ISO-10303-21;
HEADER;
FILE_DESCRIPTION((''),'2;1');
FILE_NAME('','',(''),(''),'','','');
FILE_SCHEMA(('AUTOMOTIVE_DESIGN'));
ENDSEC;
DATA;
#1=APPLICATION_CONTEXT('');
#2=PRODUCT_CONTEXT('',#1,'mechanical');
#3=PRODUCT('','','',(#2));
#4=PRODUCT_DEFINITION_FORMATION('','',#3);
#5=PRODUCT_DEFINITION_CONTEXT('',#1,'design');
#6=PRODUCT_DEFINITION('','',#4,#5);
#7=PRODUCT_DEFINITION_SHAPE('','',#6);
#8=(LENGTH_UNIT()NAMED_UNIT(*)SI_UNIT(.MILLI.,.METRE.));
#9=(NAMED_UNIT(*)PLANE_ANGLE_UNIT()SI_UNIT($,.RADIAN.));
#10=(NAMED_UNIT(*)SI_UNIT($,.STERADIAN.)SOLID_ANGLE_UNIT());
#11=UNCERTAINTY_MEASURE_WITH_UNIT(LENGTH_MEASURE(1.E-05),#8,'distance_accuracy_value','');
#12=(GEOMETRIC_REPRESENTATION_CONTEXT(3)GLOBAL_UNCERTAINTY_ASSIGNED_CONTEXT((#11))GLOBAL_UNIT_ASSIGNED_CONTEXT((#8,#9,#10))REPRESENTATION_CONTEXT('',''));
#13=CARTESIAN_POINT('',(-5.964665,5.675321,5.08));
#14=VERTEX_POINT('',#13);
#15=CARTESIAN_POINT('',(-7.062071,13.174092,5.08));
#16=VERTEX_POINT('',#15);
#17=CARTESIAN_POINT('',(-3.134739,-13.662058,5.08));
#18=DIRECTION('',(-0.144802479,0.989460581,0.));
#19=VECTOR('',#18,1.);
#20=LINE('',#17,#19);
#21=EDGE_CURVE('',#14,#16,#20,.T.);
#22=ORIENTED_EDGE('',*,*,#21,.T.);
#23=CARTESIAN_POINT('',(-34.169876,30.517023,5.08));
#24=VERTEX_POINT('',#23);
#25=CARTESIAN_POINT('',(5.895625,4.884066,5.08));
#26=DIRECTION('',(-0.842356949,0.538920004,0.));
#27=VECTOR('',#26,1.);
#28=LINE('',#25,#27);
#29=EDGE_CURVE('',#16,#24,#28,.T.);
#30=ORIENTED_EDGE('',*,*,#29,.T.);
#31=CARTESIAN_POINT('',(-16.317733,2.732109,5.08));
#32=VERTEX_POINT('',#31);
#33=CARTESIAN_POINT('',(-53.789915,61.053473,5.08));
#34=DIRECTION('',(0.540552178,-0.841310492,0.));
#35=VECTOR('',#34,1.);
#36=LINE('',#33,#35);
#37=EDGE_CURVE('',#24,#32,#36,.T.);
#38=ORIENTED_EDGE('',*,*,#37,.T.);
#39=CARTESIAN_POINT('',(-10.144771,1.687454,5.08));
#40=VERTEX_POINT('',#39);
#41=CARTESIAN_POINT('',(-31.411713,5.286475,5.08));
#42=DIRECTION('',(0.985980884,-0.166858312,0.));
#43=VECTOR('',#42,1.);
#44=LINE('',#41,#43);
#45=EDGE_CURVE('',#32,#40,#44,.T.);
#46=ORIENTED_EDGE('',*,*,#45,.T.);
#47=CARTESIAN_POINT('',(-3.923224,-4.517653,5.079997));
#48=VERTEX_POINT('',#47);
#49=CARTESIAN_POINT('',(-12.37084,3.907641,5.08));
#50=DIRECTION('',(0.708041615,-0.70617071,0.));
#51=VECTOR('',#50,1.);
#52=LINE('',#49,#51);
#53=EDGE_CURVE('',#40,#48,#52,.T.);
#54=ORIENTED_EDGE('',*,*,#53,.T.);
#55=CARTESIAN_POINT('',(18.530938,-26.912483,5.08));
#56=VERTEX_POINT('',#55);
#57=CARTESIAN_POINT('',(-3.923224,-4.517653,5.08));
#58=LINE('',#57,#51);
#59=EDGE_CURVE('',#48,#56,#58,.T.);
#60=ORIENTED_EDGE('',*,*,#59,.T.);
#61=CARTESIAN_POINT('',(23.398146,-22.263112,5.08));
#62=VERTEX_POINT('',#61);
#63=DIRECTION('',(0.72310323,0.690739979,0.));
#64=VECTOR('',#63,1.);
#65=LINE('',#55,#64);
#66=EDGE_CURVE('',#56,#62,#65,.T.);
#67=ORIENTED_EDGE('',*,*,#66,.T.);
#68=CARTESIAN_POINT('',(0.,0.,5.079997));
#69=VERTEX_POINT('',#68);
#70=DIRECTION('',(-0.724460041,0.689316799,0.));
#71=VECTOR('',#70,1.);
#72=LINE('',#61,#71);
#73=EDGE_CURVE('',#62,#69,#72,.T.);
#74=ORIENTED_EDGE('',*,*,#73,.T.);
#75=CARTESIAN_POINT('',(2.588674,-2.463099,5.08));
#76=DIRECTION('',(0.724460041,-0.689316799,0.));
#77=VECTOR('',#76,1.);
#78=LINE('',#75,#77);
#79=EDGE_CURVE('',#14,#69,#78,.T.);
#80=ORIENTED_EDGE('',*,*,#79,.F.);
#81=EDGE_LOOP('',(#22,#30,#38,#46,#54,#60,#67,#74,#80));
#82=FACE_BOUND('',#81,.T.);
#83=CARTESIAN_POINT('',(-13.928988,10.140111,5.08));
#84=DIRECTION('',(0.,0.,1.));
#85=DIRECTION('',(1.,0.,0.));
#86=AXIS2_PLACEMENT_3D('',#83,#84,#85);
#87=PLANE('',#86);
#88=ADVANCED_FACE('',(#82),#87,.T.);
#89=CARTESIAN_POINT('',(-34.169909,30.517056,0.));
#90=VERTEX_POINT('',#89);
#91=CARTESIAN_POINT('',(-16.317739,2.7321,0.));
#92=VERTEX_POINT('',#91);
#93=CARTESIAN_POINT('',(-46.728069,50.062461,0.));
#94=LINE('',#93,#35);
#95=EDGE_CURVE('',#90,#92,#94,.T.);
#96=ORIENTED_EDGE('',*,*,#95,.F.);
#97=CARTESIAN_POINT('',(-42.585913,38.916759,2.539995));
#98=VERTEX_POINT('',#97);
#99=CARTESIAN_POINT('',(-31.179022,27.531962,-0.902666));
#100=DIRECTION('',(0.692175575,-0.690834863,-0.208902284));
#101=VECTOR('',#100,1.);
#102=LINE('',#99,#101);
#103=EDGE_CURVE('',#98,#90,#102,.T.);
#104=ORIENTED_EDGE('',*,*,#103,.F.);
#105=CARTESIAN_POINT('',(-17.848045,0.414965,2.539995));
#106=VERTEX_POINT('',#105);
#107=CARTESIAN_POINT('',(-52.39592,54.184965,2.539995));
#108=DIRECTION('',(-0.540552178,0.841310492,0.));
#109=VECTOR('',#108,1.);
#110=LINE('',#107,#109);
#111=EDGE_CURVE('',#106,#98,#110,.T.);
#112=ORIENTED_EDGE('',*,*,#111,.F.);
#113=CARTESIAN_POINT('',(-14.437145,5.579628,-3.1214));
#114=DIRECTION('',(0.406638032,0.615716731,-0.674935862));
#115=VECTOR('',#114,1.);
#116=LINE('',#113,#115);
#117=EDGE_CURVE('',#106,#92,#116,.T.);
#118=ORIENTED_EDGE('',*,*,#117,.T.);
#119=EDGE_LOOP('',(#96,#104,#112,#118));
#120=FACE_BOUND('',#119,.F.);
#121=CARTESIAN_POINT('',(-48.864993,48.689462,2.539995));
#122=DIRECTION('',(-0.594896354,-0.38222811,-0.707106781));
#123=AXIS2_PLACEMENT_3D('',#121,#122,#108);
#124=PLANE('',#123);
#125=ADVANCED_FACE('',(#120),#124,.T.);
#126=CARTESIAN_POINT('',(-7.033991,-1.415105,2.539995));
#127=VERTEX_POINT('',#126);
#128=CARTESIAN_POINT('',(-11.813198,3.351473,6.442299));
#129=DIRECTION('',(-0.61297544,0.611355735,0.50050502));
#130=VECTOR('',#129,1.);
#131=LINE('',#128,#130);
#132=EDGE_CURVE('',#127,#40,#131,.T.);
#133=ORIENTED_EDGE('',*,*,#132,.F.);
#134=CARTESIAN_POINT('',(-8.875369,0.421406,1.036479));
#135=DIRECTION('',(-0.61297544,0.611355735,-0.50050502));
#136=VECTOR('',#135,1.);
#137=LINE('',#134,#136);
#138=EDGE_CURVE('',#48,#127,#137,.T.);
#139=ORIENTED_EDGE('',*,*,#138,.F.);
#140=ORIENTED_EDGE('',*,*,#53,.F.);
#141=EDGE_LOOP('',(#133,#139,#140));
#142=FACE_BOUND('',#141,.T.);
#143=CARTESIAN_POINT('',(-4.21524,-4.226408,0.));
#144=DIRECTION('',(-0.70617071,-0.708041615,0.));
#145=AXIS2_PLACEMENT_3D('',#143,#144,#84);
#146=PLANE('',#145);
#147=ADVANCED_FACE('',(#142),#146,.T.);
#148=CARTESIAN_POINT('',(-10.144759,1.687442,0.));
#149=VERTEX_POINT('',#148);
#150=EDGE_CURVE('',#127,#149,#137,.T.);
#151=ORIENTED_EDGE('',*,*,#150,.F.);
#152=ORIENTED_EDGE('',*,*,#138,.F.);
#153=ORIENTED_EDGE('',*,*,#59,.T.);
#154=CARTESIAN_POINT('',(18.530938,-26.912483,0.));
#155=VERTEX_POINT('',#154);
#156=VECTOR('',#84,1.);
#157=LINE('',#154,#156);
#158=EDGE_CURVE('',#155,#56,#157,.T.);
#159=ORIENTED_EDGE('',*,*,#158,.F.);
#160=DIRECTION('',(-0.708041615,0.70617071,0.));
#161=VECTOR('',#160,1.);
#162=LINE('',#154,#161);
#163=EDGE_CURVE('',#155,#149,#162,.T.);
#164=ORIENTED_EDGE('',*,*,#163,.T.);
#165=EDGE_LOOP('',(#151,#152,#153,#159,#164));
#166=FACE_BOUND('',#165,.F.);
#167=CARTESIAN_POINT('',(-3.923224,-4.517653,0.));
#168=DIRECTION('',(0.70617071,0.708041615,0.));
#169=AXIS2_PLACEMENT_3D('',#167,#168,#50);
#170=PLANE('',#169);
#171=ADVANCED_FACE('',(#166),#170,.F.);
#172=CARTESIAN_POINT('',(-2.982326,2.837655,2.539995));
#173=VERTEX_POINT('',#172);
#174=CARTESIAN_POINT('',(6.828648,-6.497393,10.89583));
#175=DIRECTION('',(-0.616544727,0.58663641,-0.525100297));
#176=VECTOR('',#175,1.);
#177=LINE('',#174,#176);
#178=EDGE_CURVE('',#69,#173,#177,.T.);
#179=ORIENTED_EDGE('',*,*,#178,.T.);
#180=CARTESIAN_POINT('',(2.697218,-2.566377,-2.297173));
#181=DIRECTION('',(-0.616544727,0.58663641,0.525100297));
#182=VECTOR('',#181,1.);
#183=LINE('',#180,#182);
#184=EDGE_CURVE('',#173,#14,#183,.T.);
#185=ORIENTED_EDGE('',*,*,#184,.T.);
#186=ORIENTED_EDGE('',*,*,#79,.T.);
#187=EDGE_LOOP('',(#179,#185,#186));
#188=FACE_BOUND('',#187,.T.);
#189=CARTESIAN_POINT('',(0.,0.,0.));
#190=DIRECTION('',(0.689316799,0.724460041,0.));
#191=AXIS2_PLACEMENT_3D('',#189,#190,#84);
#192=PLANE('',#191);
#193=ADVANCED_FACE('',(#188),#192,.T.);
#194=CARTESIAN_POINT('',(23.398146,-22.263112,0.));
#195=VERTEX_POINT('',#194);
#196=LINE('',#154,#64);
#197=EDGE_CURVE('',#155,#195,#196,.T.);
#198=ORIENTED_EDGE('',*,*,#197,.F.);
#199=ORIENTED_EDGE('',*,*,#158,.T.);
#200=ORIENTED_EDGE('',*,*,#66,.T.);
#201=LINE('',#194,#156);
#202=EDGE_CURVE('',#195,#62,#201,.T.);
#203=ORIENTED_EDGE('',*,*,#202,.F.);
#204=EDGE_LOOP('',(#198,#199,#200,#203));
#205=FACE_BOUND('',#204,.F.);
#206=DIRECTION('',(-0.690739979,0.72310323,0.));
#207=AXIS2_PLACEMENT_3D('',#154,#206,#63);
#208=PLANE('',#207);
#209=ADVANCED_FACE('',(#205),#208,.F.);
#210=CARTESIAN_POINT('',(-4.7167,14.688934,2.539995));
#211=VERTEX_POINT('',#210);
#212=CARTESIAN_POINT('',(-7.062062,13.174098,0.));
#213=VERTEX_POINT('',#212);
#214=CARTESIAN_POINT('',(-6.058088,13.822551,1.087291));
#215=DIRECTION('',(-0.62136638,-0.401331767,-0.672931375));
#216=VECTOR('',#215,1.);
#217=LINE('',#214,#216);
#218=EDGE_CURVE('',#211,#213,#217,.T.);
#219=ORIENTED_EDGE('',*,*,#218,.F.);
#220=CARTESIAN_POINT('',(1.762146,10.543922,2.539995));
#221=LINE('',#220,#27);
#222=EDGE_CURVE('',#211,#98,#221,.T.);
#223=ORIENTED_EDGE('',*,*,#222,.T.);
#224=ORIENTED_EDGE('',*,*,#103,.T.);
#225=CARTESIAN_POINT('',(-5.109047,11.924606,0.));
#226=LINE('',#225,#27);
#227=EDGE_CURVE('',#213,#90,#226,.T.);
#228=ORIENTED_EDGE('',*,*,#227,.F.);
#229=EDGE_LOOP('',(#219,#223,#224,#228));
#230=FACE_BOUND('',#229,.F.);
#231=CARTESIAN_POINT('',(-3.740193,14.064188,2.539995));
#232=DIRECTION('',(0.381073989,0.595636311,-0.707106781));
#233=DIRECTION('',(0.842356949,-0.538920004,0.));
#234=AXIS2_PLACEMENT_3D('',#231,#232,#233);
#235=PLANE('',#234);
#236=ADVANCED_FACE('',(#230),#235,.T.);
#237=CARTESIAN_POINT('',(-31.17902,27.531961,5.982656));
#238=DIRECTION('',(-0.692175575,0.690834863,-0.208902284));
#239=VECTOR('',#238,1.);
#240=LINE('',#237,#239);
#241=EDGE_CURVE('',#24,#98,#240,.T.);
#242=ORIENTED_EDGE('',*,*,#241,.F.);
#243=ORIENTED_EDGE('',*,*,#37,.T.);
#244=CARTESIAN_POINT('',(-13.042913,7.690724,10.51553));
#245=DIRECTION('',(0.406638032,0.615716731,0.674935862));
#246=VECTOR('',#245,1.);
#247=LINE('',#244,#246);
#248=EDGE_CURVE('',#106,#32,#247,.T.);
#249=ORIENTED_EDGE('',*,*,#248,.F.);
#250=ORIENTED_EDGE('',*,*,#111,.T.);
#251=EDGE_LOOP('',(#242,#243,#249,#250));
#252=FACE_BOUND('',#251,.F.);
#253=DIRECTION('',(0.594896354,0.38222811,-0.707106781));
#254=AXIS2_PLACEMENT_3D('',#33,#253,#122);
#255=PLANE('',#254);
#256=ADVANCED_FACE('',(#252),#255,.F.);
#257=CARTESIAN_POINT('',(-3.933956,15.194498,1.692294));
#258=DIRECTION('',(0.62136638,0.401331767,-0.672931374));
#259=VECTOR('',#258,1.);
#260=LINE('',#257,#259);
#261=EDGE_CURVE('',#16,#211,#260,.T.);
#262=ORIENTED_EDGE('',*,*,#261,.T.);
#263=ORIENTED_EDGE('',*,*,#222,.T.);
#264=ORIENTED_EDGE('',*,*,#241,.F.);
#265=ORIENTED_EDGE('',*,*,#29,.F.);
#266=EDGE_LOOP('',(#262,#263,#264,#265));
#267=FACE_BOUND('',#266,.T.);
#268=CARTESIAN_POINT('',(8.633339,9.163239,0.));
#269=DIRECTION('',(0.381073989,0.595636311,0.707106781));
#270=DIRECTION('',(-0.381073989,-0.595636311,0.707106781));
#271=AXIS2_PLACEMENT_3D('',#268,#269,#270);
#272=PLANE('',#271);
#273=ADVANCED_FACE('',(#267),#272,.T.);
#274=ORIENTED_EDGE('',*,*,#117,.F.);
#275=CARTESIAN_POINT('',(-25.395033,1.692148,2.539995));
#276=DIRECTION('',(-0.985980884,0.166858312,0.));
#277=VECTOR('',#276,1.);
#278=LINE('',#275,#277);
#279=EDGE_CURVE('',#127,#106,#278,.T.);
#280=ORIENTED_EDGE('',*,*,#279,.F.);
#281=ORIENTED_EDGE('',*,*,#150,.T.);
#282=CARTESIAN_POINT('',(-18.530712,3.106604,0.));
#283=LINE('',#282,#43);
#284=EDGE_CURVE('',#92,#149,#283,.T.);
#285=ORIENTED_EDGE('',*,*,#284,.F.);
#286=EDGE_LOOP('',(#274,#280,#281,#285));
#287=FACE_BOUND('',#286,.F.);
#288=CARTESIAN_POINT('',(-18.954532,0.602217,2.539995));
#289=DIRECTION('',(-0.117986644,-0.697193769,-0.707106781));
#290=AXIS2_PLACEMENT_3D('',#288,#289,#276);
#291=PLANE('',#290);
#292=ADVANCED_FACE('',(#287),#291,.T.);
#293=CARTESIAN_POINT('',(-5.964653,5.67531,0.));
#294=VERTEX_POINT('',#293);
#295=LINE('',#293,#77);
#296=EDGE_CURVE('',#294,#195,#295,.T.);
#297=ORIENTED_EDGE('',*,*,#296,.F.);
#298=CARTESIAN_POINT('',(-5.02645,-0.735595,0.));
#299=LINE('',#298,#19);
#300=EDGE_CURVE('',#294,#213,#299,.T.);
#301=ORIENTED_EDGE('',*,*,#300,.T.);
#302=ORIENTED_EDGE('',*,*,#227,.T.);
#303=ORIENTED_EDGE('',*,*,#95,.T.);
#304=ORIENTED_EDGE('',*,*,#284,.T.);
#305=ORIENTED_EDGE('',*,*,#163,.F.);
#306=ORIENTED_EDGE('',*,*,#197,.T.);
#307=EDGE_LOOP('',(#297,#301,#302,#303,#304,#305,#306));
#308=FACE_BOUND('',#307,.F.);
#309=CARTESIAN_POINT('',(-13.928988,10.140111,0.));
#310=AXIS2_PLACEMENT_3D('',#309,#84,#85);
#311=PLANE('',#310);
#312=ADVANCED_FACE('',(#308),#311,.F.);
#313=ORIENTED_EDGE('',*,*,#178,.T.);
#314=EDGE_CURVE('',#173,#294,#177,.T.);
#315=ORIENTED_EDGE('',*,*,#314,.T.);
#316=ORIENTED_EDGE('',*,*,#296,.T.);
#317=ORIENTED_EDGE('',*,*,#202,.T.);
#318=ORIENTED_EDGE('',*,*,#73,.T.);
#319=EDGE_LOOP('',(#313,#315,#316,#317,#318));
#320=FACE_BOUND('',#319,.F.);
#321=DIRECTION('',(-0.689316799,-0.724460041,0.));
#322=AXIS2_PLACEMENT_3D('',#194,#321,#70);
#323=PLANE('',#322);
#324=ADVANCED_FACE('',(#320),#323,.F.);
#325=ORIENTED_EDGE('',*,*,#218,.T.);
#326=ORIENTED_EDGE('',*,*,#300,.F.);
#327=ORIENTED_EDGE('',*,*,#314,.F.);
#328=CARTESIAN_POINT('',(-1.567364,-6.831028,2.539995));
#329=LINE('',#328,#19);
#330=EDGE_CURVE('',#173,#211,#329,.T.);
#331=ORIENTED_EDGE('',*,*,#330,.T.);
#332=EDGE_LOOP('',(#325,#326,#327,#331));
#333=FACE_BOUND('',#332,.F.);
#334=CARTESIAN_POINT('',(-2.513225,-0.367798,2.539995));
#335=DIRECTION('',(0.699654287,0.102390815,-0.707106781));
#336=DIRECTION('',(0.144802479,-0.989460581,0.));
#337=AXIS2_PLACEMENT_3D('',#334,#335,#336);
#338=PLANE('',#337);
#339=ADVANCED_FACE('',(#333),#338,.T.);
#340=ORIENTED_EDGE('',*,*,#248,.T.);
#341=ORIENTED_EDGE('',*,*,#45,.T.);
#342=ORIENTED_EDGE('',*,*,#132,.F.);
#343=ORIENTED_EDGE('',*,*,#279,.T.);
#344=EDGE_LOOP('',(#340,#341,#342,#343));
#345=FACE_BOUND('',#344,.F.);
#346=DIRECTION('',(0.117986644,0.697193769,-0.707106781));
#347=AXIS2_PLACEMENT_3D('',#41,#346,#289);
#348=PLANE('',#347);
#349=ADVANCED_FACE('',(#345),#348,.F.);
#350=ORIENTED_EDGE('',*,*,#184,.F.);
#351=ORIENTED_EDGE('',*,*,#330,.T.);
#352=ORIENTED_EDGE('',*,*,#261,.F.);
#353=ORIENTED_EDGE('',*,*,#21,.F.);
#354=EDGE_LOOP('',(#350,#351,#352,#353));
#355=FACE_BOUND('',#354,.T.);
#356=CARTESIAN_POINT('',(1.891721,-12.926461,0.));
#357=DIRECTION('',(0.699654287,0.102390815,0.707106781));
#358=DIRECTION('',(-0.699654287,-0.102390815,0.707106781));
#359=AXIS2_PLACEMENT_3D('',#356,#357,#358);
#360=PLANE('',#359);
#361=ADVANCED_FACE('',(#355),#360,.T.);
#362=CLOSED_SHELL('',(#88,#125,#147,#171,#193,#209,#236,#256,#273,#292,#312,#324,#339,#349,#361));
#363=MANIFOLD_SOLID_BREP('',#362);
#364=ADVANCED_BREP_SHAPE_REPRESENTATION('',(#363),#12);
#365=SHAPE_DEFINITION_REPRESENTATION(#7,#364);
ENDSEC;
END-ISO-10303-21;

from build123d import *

# Parameters (mm, degrees)
F4_DEPTH     = 5.08
F5_SIZE2     = 5.07999
F5_SIZE      = 5.07999
F6_T1_DEPTH  = 83.8598569958
F6_T3_DEPTH  = 84.6306377444
F6_T8_DEPTH  = 42.5046669686
F6_T13_DEPTH = 41.8031738059


# Not quite as in the source:
# - a fillet or chamfer that OpenCascade refuses, or shapes differently, is made with other operations: its cross-section is extruded or revolved along the edge and cut away or added
# - a fillet or chamfer is up to 0.001 mm smaller than in the source, because OpenCascade refuses the exact size
# - the program builds the solid bodies; features that only make, move or delete a surface that nothing else refers to are left out


with BuildPart() as f4:
    # F0 (on Top) → F4 (new body)
    with BuildSketch(Plane.XY):
        Polygon((-2.3713386618, 16.203770414), (-51.0019175708, 47.3164618015), (-19.3783510476, -1.9021694316), (-3.9232242852, -4.51765256), (18.5309383262, -26.9124830378), (23.3981461688, -22.2631122398), (0, 0), align=None)
    extrude(amount=F4_DEPTH)

    # F5 (size 5.08 and 5.08 in the source; OpenCascade refuses exactly that, so slightly less here)
    f5_edges = [f4.edges().sort_by_distance(p)[0] for p in [
        (-11.650788, -3.209911, 0),
        (-35.190134, 22.707146, 0),
        (-26.686628, 31.760116, 0),
        (-1.185669, 8.101885, 0),
    ]]
    chamfer(f5_edges, length=F5_SIZE, length2=F5_SIZE2)

    # F6: chamfer of 5.08 on 4 edges, made by hand

    # F6_s2 → F6_t1 (cut)
    with BuildSketch(Plane(origin=(1.9661453214, -1.2578931606, 0), x_dir=(0, 0, 1), z_dir=(-0.8423569488, 0.5389200041, 0))):
        Polygon((0, 12.3713967634), (5.08, 7.2913967634), (5.08, 12.3713967634), align=None)
    extrude(amount=F6_T1_DEPTH, mode=Mode.SUBTRACT)

    # F6_s4 → F6_t3 (cut)
    with BuildSketch(Plane(origin=(-43.4826566064, 67.6760111474, 0), x_dir=(0, 0, 1), z_dir=(0.5405521777, -0.8413104915, 0))):
        Polygon((5.08, 12.2514318739), (0, 17.3314318739), (5.08, 17.3314318739), align=None)
    extrude(amount=F6_T3_DEPTH, mode=Mode.SUBTRACT)


with BuildPart() as f6_tool6:
    # F6_s7 → F6_t8 (new body)
    with BuildSketch(Plane(origin=(1.8917212496, -12.9264610367, 0), x_dir=(0, 0, 1), z_dir=(-0.1448024793, 0.9894605813, 0))):
        Polygon((0, 0), (5.08, -5.08), (5.08, 0), align=None)
    extrude(amount=F6_T8_DEPTH)

    split(bisect_by=Plane(origin=(0, 0, 0), x_dir=(0, 0, 1), z_dir=(0.6893167986, 0.7244600411, 0)), keep=Keep.TOP)


with BuildPart() as f4_1:
    add(f4.part)

    # F6_t5: cut F6_tool6
    add(f6_tool6.part, mode=Mode.SUBTRACT)


with BuildPart() as f6_tool11:
    # F6_s12 → F6_t13 (new body)
    with BuildSketch(Plane(origin=(-31.4068834176, 5.3150113201, 0), x_dir=(0, 0, 1), z_dir=(0.985980884, -0.1668583122, 0))):
        Polygon((5.08, 0.0289416476), (0, 5.1089416476), (5.08, 5.1089416476), align=None)
    extrude(amount=F6_T13_DEPTH)

    split(bisect_by=Plane(origin=(-4.2152403692, -4.2264080896, 0), x_dir=(0, 0, 1), z_dir=(-0.7061707096, -0.7080416152, 0)), keep=Keep.TOP)


with BuildPart() as f4_2:
    add(f4_1.part)

    # F6_t10: cut F6_tool11
    add(f6_tool11.part, mode=Mode.SUBTRACT)


solid = f4_2.part
